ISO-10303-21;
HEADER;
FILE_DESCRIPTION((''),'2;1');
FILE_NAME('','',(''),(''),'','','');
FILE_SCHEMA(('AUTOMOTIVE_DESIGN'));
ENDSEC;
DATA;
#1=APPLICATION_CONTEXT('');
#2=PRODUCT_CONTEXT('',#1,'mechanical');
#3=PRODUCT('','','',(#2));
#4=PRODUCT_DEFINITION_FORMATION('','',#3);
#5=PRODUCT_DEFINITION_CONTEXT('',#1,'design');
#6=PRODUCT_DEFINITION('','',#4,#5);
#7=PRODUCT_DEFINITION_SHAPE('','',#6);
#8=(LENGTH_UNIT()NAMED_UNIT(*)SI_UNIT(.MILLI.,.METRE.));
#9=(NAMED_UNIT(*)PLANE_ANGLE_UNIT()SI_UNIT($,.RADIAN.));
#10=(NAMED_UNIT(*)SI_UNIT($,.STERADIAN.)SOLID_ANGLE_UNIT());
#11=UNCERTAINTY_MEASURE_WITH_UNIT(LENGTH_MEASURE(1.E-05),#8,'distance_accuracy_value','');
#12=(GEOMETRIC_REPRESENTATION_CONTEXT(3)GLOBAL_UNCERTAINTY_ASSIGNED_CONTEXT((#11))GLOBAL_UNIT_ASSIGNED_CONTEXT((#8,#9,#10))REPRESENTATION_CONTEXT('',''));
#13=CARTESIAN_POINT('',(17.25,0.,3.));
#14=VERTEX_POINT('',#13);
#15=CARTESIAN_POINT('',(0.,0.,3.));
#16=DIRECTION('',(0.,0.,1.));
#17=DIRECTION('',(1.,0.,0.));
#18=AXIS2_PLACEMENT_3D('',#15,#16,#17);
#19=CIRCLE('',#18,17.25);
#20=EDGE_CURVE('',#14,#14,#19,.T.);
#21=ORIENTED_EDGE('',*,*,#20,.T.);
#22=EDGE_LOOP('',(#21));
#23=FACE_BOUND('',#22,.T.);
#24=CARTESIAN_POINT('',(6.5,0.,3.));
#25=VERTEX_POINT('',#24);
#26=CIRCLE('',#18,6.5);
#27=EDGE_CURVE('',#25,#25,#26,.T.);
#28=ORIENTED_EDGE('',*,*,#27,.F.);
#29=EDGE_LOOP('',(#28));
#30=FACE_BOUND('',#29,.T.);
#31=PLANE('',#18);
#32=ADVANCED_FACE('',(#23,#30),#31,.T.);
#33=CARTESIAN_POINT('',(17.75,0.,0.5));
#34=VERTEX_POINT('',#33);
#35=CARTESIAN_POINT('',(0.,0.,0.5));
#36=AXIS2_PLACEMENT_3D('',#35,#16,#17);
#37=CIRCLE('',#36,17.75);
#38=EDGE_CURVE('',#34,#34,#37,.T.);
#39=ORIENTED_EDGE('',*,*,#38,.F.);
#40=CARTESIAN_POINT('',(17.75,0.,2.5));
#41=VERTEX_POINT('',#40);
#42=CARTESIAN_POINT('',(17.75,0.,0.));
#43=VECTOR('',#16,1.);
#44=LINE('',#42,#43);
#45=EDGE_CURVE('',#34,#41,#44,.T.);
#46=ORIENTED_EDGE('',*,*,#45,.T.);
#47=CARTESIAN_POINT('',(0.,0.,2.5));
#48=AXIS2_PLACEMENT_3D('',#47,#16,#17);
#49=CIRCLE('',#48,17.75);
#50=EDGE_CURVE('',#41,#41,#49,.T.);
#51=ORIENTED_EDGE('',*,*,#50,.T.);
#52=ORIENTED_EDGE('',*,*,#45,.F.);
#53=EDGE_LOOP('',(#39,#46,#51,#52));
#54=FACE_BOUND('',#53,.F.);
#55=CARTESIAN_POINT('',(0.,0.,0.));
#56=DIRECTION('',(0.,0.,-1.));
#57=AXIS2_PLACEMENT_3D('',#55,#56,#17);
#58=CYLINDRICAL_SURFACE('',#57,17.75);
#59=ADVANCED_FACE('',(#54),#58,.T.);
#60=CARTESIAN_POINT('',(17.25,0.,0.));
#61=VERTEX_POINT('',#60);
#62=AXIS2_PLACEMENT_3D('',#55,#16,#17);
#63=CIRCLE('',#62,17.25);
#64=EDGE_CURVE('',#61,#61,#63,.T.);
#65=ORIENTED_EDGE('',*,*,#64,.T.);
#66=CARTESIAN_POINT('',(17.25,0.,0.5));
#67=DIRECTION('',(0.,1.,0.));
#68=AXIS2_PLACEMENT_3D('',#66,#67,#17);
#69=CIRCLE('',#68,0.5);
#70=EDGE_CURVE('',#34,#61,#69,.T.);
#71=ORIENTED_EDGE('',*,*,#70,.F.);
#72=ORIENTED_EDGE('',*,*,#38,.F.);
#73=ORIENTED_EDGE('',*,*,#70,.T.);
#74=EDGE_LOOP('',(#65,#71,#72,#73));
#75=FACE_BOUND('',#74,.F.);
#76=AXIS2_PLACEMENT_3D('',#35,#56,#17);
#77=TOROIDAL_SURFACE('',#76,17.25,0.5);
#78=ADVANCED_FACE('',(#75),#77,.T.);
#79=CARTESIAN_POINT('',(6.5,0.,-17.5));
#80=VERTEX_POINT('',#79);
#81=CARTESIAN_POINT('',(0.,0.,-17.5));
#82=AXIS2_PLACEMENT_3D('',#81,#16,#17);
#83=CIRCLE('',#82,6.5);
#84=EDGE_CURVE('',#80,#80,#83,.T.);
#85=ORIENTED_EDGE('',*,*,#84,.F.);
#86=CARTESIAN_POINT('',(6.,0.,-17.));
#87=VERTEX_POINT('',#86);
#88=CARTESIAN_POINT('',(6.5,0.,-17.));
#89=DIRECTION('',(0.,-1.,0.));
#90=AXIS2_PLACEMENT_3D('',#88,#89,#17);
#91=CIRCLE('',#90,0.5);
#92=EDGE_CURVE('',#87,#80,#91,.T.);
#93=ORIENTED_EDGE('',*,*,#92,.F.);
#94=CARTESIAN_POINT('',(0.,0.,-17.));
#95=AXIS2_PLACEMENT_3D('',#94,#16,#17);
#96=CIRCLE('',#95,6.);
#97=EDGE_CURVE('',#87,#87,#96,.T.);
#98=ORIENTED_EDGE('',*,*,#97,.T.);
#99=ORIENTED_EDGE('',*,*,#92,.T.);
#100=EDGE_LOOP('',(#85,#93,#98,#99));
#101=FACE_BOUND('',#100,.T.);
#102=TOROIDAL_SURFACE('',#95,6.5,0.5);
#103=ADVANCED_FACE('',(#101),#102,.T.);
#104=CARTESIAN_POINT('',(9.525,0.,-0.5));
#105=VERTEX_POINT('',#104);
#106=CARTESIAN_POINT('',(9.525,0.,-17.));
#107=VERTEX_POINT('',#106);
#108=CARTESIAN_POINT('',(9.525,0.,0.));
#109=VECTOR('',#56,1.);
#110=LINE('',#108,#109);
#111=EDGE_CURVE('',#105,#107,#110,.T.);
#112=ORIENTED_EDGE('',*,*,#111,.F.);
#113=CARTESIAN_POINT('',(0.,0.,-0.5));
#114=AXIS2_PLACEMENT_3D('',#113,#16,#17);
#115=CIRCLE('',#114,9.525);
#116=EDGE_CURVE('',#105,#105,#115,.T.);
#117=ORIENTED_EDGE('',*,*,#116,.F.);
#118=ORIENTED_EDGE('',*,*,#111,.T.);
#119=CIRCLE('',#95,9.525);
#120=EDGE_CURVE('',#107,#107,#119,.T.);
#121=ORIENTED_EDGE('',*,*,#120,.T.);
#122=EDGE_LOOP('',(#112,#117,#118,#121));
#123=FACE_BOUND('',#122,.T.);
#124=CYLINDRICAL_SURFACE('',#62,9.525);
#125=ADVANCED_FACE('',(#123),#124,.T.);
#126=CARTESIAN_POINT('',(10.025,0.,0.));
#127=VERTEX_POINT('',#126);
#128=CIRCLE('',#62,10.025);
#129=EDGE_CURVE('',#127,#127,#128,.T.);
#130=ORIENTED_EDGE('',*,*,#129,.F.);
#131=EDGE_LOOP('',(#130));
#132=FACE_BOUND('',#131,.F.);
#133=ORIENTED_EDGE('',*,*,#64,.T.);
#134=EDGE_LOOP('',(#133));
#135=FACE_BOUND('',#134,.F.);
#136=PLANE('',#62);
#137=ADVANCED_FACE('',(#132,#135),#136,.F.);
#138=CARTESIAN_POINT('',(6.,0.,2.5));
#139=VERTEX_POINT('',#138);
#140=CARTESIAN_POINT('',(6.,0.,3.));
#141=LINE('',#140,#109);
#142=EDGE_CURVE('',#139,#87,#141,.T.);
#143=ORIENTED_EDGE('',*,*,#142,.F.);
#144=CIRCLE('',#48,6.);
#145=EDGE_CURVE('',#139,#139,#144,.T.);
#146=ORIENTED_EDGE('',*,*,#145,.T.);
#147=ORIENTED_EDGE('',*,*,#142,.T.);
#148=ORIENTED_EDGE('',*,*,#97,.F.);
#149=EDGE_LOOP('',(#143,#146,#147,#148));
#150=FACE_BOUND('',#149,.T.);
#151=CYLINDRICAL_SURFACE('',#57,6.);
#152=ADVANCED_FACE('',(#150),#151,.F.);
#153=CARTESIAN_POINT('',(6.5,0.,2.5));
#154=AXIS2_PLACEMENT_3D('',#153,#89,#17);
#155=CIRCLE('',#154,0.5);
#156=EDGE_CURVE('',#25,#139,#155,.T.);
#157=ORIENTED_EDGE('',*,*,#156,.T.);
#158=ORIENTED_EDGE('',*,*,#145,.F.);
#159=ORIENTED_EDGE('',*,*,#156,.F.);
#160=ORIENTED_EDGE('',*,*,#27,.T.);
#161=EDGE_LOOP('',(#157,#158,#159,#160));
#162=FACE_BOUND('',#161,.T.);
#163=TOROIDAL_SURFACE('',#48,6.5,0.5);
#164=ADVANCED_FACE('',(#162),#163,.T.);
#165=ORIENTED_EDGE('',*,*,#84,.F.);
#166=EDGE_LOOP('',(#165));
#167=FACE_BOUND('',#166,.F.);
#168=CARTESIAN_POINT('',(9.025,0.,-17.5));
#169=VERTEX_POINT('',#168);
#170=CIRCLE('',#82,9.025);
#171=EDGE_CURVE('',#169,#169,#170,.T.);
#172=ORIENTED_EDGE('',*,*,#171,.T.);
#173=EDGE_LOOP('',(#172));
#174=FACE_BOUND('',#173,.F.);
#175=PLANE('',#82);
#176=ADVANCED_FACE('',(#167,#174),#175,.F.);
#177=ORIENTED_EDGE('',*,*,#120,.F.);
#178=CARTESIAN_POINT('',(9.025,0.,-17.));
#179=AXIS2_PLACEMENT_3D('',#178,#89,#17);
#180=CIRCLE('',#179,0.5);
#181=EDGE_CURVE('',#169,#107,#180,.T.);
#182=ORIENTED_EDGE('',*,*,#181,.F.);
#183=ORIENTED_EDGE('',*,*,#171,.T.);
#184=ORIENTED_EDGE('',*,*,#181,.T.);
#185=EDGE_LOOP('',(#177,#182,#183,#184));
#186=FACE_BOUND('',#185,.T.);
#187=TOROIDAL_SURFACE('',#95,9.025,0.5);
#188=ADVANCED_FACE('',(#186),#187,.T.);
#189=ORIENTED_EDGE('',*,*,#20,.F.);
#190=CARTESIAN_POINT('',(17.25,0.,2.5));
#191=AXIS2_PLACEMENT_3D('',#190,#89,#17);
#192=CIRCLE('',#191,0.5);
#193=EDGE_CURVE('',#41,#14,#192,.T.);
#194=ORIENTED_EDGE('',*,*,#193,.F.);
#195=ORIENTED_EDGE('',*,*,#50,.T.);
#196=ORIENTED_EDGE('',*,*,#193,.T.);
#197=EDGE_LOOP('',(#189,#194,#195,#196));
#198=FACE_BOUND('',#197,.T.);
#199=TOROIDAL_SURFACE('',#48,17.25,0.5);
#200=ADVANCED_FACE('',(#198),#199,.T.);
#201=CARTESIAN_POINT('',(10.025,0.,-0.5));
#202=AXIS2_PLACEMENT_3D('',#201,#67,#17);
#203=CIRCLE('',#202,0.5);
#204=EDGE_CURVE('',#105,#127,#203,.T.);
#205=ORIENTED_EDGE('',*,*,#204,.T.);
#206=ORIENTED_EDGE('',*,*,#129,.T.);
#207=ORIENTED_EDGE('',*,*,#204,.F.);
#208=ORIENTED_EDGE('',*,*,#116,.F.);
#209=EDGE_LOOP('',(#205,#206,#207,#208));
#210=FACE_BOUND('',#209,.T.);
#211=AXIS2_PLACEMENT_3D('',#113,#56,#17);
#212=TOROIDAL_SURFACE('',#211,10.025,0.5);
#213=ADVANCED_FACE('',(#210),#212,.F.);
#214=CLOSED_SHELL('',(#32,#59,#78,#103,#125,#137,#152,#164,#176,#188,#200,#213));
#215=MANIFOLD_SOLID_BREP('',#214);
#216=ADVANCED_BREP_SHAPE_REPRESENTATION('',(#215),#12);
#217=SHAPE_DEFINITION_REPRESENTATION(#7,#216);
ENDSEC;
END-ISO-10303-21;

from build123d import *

# Parameters (mm, degrees)
F0_R     = 9.525
F0_R_2   = 6
F1_DEPTH = 17.5
F2_R     = 17.75
F2_R_2   = 6
F3_DEPTH = 3
F4_R     = 0.5


with BuildPart() as f1:
    # F0 (on Top) → F1 (new body)
    with BuildSketch(Plane.XY):
        Circle(F0_R)
        Circle(F0_R_2, mode=Mode.SUBTRACT)
    extrude(amount=-F1_DEPTH)

    # F2 (on Top) → F3 (join)
    with BuildSketch(Plane.XY):
        Circle(F2_R)
        Circle(F2_R_2, mode=Mode.SUBTRACT)
    extrude(amount=F3_DEPTH)

    # F4
    f4_edges = [f1.edges().sort_by_distance(p)[0] for p in [
        (-9.525, 0, -17.5),
        (-6, 0, -17.5),
        (-17.75, 0, 0),
        (-9.525, 0, 0),
        (-17.75, 0, 3),
        (-6, 0, 3),
    ]]
    fillet(f4_edges, radius=F4_R)


solid = f1.part
